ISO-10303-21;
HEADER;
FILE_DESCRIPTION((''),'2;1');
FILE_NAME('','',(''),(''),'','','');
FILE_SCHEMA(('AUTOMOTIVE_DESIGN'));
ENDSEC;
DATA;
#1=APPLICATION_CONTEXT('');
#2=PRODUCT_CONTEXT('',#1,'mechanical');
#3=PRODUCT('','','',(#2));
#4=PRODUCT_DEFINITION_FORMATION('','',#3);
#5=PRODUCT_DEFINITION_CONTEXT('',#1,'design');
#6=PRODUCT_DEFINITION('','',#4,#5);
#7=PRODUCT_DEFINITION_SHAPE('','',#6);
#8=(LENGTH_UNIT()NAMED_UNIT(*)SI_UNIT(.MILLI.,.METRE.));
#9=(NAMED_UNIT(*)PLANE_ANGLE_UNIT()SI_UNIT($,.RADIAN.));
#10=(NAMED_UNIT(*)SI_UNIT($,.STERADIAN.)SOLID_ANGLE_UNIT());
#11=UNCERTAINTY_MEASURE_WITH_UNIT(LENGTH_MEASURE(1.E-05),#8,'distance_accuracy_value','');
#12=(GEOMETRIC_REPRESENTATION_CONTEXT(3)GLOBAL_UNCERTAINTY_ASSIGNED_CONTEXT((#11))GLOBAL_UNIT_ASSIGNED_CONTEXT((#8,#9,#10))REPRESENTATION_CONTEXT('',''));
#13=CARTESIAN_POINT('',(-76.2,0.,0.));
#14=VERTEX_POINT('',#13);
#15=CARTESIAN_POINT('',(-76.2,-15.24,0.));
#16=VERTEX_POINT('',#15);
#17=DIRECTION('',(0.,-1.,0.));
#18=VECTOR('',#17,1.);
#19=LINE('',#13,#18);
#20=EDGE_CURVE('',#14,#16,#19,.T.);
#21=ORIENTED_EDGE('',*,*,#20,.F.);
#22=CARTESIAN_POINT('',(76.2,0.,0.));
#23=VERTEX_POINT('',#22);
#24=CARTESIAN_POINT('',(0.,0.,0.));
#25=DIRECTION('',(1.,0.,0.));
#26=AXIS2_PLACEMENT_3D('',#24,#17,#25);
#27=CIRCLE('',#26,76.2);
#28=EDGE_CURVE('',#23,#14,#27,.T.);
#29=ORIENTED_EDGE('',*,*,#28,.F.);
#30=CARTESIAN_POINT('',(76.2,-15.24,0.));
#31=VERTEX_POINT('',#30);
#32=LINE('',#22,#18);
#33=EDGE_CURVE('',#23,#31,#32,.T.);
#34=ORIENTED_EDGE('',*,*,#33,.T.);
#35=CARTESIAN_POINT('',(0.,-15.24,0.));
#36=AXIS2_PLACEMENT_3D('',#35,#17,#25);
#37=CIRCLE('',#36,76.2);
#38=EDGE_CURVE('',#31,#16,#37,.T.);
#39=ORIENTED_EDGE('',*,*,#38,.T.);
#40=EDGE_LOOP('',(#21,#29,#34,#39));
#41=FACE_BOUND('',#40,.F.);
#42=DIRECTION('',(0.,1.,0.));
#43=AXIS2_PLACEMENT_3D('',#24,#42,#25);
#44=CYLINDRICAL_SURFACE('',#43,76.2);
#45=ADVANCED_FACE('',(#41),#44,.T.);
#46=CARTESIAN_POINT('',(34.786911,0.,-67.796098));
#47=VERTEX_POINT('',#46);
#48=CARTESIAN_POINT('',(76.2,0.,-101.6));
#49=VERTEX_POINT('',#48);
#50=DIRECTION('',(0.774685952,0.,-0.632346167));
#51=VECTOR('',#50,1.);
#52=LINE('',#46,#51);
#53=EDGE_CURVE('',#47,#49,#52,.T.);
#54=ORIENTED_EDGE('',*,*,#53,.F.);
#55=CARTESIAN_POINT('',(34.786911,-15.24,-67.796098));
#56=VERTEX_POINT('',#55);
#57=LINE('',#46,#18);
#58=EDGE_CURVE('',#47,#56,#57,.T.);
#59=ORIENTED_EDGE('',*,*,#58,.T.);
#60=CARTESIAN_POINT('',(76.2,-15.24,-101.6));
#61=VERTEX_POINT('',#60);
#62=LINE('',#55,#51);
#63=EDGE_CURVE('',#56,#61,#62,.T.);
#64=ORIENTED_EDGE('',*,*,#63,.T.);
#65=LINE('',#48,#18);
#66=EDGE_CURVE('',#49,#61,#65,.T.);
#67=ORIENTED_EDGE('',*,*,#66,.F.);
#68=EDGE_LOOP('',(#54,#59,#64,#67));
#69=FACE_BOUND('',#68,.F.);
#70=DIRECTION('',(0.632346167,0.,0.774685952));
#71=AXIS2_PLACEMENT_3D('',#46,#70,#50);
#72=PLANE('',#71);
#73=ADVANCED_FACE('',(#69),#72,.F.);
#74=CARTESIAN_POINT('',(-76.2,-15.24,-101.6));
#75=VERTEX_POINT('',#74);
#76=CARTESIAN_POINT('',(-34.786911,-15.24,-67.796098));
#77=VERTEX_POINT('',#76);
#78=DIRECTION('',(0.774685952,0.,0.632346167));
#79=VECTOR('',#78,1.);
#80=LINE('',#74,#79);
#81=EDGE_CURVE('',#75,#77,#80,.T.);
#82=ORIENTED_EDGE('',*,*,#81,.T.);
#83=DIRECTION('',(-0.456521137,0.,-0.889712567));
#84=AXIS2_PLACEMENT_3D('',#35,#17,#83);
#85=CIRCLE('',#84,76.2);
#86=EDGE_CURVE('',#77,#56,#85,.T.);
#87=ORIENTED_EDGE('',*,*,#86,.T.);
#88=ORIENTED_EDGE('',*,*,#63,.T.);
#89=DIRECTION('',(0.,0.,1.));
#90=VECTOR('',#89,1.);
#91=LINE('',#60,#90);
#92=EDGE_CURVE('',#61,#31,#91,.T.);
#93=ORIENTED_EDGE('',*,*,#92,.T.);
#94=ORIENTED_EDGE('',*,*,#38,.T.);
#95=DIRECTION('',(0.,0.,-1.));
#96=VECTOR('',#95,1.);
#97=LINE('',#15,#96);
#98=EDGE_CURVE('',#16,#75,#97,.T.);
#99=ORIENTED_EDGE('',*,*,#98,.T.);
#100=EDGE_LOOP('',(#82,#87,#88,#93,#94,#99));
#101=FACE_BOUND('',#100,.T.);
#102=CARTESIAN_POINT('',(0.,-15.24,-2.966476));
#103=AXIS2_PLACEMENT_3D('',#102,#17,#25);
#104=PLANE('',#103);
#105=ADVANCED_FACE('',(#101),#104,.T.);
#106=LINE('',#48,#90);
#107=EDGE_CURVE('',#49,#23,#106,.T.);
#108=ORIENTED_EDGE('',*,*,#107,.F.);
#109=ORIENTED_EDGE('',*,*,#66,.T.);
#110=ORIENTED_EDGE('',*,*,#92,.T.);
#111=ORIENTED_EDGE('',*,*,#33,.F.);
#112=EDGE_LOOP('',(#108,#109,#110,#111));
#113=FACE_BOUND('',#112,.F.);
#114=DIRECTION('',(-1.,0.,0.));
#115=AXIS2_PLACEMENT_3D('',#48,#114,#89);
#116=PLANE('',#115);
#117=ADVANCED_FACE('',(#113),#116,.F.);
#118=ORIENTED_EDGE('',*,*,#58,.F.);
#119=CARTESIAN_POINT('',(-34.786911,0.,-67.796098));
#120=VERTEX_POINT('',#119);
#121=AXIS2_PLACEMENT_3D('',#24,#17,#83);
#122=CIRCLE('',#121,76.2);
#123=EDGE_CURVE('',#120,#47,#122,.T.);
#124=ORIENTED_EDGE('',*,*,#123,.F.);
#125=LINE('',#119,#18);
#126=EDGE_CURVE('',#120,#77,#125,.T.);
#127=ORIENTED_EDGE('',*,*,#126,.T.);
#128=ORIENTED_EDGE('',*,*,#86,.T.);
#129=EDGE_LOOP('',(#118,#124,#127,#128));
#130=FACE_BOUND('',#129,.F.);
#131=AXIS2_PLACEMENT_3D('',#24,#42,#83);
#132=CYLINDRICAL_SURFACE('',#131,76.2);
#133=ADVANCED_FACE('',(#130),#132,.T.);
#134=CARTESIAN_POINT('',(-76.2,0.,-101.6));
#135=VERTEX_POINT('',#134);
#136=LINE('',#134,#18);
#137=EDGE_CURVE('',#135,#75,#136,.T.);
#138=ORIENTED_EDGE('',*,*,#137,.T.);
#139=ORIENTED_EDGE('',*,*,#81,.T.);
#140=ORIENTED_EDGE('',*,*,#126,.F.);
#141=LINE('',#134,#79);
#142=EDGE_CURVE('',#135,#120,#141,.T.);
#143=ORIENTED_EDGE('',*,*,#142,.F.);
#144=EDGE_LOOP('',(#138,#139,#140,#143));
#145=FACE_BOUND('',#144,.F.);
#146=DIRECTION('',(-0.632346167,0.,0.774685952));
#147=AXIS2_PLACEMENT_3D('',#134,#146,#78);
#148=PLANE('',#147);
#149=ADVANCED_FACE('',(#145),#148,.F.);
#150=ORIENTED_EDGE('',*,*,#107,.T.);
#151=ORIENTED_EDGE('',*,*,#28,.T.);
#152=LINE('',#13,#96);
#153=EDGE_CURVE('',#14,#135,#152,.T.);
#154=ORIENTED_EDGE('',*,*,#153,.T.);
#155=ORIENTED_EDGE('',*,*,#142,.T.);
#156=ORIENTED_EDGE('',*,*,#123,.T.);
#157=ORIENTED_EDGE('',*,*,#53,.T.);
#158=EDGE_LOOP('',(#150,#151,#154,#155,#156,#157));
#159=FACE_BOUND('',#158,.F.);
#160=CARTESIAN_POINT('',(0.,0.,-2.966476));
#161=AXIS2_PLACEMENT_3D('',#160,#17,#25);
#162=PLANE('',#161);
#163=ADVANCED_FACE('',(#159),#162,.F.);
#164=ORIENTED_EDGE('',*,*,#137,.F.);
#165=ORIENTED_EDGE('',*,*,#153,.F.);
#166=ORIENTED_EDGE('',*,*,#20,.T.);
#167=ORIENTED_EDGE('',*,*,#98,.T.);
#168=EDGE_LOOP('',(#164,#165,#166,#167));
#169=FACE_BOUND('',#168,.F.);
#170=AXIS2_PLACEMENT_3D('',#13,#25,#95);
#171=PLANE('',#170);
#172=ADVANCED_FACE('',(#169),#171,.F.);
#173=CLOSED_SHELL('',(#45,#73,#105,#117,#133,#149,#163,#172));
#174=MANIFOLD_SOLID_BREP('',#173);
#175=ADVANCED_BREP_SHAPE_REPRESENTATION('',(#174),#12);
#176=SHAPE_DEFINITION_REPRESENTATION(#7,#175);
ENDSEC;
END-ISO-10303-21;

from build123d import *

# Parameters (mm, degrees)
F1_DEPTH = 15.24


# Not quite as in the source:
# - a feature names something its author has since deleted; it is built from what else it names


with BuildPart() as f1:
    # F0 (on Front) → F1 (new body)
    with BuildSketch(Plane.XZ):
        with BuildLine():
            ThreePointArc((34.7869106265, -67.7960975946), (65.0276963676, -39.7220178884), (76.2, 0))
            ThreePointArc((76.2, 0), (0, 76.2), (-76.2, 0))
            ThreePointArc((-76.2, 0), (-65.0276963676, -39.7220178884), (-34.7869106265, -67.7960975946))
            ThreePointArc((-34.7869106265, -67.7960975946), (0, -76.2), (34.7869106265, -67.7960975946))
        make_face()
        with BuildLine():
            Line((76.2, -101.6), (76.2, 0))
            ThreePointArc((76.2, 0), (65.0276963676, -39.7220178884), (34.7869106265, -67.7960975946))
            Line((34.7869106265, -67.7960975946), (76.2, -101.6))
        make_face()
        with BuildLine():
            ThreePointArc((-34.7869106265, -67.7960975946), (-65.0276963676, -39.7220178884), (-76.2, 0))
            Line((-76.2, 0), (-76.2, -101.6))
            Line((-76.2, -101.6), (-34.7869106265, -67.7960975946))
        make_face()
    extrude(amount=F1_DEPTH)


solid = f1.part
